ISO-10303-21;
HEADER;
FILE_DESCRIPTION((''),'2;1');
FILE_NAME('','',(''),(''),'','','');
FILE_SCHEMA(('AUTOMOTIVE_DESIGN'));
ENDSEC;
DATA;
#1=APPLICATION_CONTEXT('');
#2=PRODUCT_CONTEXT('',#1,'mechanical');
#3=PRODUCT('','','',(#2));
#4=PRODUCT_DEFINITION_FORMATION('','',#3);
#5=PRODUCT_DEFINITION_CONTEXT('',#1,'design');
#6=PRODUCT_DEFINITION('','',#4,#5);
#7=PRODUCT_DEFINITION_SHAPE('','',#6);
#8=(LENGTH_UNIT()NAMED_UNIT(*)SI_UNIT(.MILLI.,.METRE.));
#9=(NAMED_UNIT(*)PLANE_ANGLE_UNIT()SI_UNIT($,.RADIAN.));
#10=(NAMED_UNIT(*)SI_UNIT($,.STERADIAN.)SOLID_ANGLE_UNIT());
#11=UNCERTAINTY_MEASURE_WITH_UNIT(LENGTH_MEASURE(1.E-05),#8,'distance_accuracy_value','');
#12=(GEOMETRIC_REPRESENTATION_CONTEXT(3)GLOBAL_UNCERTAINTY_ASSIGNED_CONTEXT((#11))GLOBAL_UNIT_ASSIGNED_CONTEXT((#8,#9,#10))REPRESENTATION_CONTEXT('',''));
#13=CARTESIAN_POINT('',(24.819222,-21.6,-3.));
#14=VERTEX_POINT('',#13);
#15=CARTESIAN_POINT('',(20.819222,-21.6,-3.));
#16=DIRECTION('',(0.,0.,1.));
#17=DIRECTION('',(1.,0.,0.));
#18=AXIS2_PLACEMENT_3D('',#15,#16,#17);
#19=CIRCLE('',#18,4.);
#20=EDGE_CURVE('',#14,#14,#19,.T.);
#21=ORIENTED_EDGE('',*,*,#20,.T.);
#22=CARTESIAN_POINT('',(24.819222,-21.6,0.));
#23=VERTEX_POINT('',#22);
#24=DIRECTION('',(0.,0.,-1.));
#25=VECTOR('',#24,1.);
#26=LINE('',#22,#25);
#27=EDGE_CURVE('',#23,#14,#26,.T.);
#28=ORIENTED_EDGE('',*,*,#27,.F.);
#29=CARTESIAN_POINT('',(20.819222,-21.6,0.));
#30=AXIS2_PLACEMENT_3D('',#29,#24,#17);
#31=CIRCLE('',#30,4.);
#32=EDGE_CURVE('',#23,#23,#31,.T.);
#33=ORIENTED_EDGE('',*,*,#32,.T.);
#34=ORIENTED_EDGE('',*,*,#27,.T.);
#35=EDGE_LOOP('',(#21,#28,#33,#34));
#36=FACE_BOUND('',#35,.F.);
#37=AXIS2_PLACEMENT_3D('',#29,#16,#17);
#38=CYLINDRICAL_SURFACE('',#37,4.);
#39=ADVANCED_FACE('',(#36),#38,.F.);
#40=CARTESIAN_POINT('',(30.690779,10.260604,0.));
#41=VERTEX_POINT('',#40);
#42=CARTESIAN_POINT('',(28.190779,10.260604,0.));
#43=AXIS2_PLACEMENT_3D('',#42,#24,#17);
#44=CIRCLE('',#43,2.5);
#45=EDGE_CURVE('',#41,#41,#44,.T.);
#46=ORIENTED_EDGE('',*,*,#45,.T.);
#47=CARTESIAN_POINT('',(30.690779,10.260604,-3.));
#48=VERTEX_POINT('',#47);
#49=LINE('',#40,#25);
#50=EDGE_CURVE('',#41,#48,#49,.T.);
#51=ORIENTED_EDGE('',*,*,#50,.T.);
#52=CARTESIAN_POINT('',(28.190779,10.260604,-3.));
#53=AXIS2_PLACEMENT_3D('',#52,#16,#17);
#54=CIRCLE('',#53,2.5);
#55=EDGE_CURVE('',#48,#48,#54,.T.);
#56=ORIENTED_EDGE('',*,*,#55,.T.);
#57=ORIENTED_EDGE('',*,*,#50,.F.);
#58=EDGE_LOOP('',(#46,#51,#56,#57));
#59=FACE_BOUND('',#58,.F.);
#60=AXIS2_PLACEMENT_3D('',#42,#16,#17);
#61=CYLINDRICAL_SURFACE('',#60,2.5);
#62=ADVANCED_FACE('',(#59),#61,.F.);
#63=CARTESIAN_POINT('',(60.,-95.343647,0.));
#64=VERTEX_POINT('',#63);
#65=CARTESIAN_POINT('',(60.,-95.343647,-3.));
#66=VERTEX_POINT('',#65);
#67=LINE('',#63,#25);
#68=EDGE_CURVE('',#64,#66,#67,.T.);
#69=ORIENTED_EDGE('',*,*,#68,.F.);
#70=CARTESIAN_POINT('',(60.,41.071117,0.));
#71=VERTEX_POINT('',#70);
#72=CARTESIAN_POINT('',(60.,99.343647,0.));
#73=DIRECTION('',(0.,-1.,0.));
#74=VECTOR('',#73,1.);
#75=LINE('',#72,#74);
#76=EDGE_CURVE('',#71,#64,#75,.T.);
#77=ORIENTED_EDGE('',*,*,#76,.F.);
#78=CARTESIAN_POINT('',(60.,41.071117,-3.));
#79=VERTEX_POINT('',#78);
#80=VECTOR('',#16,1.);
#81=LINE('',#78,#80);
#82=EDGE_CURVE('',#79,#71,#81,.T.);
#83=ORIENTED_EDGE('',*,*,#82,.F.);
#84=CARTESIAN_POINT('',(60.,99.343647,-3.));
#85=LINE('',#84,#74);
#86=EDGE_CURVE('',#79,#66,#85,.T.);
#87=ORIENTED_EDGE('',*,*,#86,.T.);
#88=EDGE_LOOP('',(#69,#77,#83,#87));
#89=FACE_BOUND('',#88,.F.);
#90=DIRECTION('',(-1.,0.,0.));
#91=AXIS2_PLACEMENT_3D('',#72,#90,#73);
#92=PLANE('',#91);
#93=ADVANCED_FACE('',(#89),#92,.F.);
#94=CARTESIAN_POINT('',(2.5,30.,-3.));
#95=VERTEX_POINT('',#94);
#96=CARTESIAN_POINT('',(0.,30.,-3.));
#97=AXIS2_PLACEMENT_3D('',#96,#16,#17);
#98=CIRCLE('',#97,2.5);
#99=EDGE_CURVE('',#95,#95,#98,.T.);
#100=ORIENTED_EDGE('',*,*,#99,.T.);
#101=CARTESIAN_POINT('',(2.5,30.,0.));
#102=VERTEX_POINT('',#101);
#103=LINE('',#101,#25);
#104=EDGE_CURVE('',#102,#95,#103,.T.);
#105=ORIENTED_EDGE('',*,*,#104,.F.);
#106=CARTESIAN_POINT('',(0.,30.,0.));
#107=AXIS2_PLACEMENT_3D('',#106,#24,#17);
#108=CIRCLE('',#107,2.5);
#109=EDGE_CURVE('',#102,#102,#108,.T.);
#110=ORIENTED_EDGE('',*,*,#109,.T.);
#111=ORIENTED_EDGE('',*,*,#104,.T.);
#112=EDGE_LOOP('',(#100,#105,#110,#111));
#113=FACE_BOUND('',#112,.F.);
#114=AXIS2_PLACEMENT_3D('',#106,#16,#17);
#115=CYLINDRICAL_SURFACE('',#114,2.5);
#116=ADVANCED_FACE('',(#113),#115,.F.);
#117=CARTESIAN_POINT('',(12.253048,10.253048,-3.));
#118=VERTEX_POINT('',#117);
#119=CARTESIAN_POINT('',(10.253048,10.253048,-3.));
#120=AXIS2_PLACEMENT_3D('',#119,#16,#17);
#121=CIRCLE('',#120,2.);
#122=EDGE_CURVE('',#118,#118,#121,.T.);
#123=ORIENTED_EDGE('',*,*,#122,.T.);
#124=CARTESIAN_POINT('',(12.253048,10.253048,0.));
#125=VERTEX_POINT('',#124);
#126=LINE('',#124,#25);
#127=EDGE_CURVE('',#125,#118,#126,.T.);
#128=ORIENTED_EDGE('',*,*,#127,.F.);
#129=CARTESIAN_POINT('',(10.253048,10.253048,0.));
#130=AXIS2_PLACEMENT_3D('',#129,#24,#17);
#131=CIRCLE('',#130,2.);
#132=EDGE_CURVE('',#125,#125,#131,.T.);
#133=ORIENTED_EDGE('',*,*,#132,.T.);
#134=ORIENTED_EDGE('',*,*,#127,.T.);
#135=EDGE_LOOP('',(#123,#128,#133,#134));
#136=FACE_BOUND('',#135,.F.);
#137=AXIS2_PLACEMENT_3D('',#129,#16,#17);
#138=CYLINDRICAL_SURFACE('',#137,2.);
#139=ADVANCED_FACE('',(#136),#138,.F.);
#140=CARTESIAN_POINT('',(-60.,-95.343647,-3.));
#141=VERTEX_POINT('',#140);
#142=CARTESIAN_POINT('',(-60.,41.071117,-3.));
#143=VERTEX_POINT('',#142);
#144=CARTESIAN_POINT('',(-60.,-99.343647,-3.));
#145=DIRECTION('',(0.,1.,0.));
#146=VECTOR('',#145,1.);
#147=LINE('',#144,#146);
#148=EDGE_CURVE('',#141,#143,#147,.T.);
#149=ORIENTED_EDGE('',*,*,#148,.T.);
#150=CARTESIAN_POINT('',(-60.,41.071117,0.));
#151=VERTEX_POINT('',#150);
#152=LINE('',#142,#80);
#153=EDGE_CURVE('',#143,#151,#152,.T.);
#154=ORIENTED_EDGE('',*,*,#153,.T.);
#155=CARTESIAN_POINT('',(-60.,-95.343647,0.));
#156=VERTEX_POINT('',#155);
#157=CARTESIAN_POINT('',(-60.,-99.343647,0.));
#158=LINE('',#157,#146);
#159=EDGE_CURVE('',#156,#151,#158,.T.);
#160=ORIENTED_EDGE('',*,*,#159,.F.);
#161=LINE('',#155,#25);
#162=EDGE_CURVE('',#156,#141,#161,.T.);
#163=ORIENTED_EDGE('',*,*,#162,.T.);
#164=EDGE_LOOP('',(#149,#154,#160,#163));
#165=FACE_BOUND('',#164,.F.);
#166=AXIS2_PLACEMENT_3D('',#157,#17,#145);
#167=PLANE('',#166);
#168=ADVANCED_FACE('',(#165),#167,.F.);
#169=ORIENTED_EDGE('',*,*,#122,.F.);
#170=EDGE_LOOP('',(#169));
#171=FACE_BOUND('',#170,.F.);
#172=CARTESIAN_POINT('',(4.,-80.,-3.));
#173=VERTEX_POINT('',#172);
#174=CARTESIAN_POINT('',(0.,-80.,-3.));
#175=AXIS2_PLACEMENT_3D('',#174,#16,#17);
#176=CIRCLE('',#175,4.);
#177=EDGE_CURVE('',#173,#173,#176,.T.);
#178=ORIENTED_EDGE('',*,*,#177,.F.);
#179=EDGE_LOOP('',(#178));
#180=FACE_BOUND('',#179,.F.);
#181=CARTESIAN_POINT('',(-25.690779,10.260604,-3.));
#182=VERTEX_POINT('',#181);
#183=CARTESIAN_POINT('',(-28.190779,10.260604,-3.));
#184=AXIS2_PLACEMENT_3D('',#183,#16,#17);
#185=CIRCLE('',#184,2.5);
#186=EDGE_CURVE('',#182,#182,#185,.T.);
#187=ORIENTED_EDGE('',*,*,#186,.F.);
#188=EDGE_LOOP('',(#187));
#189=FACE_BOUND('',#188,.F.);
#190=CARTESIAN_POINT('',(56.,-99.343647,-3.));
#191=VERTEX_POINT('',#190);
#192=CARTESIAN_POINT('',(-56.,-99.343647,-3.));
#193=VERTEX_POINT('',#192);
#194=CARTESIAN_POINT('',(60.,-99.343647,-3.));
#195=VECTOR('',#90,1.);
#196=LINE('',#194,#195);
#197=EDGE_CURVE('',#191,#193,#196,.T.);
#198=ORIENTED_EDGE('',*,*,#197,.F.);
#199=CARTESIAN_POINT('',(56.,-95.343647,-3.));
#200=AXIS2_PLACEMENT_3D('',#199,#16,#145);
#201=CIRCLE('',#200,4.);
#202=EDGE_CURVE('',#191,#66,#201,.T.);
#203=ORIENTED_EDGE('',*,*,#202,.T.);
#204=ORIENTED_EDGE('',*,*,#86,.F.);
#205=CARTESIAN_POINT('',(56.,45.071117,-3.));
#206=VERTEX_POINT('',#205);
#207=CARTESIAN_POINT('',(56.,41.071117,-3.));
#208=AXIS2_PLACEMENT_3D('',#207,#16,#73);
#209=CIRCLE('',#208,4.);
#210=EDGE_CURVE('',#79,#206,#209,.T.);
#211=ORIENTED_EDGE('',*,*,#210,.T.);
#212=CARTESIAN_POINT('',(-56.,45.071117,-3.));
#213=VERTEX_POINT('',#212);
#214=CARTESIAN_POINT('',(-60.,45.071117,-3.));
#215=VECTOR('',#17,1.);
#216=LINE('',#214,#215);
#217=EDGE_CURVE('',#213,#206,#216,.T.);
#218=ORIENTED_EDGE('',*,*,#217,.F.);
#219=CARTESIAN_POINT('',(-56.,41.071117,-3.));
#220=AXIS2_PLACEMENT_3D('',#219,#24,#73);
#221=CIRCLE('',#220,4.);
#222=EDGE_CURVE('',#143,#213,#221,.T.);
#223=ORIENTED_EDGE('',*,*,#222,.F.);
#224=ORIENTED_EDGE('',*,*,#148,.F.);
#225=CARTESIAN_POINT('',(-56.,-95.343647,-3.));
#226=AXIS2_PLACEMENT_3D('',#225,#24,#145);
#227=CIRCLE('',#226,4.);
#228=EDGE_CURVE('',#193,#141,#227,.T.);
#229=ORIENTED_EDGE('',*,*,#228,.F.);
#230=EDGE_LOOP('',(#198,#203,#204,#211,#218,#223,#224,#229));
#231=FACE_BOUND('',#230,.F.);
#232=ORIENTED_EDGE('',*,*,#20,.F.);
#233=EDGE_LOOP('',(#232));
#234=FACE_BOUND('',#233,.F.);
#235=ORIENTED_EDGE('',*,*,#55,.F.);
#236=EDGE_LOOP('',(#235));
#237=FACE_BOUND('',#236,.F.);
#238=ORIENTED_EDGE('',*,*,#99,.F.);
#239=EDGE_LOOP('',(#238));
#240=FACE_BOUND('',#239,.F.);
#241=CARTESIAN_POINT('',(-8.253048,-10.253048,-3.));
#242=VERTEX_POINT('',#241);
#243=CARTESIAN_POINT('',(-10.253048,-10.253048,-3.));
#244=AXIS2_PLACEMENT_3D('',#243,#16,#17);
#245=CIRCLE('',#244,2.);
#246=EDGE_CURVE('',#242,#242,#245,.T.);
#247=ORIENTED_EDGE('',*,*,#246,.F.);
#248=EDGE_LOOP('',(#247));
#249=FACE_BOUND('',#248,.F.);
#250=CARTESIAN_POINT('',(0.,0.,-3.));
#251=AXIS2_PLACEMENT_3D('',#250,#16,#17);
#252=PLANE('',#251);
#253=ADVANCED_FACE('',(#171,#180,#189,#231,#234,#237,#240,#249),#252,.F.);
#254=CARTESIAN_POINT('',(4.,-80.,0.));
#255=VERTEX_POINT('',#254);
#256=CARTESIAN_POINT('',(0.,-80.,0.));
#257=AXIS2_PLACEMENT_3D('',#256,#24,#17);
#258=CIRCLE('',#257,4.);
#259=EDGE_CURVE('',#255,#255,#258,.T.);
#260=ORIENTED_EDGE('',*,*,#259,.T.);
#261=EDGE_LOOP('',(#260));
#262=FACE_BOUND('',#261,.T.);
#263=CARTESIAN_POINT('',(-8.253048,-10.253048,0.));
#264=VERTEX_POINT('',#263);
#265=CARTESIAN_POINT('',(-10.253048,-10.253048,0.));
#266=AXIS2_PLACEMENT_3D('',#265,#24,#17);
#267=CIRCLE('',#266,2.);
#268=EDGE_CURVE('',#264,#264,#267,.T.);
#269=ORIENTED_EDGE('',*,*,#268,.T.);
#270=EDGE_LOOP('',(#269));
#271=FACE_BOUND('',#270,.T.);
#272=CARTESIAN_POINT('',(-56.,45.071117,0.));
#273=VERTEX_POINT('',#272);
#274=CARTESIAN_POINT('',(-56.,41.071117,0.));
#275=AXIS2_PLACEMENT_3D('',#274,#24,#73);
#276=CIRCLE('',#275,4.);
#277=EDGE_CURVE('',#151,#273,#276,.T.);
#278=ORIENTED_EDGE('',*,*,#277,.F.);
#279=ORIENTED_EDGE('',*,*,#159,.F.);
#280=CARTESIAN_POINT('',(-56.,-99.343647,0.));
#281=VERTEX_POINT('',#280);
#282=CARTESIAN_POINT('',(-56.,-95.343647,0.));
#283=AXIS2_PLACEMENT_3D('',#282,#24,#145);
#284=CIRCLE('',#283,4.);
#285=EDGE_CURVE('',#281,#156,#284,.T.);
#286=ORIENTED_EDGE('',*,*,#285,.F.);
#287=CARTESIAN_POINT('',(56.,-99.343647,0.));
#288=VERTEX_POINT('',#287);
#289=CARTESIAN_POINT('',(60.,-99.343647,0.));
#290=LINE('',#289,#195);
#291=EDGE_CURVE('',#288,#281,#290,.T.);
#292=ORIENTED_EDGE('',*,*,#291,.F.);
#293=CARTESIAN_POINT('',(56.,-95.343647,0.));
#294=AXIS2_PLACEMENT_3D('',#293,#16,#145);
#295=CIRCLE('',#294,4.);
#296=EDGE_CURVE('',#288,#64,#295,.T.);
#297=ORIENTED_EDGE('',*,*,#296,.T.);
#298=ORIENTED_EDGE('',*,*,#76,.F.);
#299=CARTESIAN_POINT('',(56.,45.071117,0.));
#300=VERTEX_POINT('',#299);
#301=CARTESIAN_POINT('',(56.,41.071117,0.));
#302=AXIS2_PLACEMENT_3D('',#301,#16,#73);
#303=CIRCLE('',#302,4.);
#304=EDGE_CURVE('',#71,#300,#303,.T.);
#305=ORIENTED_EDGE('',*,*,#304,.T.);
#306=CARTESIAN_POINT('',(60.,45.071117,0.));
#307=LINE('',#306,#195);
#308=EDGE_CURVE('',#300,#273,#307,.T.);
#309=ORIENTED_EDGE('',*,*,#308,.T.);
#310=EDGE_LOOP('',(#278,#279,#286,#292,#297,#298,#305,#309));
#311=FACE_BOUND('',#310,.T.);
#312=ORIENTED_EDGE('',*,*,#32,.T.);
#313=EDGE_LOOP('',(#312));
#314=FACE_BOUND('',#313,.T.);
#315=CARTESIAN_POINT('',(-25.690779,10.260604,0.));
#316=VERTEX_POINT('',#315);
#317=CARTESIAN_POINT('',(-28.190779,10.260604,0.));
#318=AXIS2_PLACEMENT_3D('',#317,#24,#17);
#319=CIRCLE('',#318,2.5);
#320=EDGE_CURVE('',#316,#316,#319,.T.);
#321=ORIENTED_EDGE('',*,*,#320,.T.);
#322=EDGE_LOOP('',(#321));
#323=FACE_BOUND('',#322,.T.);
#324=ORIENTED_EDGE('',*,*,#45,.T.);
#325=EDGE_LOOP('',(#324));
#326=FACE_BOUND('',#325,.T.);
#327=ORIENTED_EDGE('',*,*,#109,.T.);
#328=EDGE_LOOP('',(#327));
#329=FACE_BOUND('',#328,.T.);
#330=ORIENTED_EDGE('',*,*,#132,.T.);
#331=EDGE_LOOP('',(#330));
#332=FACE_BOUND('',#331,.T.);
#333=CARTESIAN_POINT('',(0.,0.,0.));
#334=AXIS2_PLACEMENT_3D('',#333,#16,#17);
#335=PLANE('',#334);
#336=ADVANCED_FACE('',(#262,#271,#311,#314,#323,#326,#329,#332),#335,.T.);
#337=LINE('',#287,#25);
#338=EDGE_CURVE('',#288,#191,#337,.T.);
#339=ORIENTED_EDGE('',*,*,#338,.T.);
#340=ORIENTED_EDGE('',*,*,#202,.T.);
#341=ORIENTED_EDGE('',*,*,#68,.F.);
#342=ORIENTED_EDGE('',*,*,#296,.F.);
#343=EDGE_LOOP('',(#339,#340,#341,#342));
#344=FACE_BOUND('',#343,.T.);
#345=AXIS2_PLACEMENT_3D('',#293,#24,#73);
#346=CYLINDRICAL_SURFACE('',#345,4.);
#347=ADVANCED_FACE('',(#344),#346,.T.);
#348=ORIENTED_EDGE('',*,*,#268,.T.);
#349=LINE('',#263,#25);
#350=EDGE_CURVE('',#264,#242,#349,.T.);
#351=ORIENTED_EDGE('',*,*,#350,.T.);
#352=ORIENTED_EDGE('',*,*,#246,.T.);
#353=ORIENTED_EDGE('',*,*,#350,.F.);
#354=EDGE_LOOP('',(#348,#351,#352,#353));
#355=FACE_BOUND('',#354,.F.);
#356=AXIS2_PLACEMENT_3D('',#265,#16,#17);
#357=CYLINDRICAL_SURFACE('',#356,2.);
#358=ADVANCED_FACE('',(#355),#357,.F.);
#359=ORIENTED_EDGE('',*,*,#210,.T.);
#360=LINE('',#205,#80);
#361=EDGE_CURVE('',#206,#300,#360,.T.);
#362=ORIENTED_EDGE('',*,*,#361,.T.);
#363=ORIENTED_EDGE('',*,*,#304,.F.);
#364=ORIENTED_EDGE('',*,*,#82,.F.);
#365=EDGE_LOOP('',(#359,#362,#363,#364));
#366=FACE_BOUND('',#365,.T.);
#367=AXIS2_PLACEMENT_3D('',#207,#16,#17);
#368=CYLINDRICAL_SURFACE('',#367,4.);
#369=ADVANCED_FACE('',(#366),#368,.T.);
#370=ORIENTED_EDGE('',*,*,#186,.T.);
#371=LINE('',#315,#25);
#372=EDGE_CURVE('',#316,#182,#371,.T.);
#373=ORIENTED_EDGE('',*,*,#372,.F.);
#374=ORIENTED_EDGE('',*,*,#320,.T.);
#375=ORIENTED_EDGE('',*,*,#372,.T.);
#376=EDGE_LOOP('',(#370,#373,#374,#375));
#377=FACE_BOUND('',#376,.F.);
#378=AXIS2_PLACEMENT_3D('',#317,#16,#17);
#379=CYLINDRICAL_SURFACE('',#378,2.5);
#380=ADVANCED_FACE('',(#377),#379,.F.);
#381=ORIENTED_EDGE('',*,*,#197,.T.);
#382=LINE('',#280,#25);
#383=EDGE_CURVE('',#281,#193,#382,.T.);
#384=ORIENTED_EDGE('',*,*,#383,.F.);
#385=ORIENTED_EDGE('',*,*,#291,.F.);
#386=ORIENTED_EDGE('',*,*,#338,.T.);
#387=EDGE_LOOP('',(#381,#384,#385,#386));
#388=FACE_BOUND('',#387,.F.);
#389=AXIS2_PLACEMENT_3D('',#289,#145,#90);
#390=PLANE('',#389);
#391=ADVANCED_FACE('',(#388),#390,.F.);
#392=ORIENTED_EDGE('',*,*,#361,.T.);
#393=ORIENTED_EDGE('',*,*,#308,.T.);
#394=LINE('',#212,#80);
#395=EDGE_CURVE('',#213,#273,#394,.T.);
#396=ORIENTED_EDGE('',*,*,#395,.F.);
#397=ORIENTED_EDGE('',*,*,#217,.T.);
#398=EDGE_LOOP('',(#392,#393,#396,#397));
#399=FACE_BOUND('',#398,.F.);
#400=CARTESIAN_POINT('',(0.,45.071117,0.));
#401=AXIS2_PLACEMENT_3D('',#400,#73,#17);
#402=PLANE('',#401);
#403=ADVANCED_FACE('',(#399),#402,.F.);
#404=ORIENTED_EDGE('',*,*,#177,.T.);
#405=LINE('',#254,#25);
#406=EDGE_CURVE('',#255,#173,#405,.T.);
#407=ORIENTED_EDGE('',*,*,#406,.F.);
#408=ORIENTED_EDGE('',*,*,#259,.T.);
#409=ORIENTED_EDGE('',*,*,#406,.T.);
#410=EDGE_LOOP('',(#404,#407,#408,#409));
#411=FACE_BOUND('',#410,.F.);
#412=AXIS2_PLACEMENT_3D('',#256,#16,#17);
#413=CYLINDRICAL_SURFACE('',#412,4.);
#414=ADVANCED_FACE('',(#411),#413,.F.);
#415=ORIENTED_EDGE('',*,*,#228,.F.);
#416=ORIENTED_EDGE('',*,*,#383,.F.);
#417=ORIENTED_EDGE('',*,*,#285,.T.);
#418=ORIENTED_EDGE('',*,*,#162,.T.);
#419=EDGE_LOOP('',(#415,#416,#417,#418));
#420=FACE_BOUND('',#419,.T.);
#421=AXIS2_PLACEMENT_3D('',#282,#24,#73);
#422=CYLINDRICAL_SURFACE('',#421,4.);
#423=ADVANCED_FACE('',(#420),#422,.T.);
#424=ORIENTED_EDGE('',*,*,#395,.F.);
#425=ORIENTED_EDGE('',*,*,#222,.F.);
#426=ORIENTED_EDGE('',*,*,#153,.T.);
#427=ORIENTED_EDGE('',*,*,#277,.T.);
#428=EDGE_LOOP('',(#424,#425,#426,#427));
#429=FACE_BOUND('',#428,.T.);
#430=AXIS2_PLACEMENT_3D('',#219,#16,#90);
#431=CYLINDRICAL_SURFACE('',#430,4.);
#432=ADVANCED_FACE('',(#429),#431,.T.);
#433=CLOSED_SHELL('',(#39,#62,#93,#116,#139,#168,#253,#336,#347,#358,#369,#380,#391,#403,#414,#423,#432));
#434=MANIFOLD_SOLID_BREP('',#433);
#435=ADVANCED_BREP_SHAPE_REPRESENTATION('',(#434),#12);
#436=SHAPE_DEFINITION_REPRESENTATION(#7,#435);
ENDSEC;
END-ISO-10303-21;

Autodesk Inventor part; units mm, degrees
ref_plane "YZ Plane" through (0, 0, 0) normal (1, 0, 0) x (0, 1, 0)
ref_plane "XZ Plane" through (0, 0, 0) normal (0, 1, 0) x (-1, 0, 0)
ref_plane "XY Plane" through (0, 0, 0) normal (0, 0, 1) x (1, 0, 0)
sketch "スケッチ1" plane through (0, 0, 0) normal (0, 0, 1) x (1, 0, 0)
  circle A0 centre (0, 0) radius 21.2
  circle A1 centre (0, 0) radius 7.5
  circle A2 centre (0, 0) radius 30
  circle A3 centre (20.819222, -21.6) radius 22.5
  circle A4 centre (20.819222, -21.6) radius 14
  circle A5 centre (20.819222, -21.6) radius 62
  circle A6 centre (0, -80) radius 48
  circle A7 centre (0, -80) radius 50
  circle A8 centre (20.819222, -21.6) radius 4
  circle A9 centre (0, -80) radius 4
  dimension "d2" = 60
  dimension "d4" = 124
  dimension "d0" = 42.4
  dimension "d1" = 15
  dimension "d3" = 28
  dimension "d5" = 100
  dimension "d23" = 8
  dimension "d41" = 8
sketch "スケッチ2" plane through (0, 0, 0) normal (0, 0, 1) x (1, 0, 0)
  line L0 (0, 0) -> (24.501973, 0) construction
  line L1 (0, 0) -> (12.5, 0) construction
  line L2 (0, 0) -> (10.253048, 10.253048)
  line L3 (0, 0) -> (14.5, 0) construction
  line L4 (10.253048, 10.253048) -> (-10.253048, -10.253048)
  circle A0 centre (10.253048, 10.253048) radius 2
  circle A1 centre (-10.253048, -10.253048) radius 2
  circle A2 centre (0, 0) radius 7.5
  line L5 (0, 0) -> (28.190779, 10.260604)
  line L6 (0, 0) -> (30, 0) construction
  line L7 (0, 0) -> (-28.190779, 10.260604)
  line L8 (0, 0) -> (30, 0) construction
  circle A3 centre (-28.190779, 10.260604) radius 2.5
  line L9 (0, 0) -> (0, 30)
  circle A4 centre (0, 30) radius 2.5
  circle A5 centre (28.190779, 10.260604) radius 2.5
  dimension "d9" = 14.5
  dimension "d10" = 45
  dimension "d11" = 29
  dimension "d12" = 4
  dimension "d13" = 4
  dimension "d14" = 15
  dimension "d15" = 30
  dimension "d16" = 20
  dimension "d17" = 30
  dimension "d18" = 160
  dimension "d19" = 5
  dimension "d20" = 30
  dimension "d21" = 5
  dimension "d22" = 5
sketch "スケッチ3" plane through (0, 0, 0) normal (0, 0, 1) x (1, 0, 0)
  line L0 (60, -99.343647) -> (-60, -99.343647)
  line L1 (-60, -99.343647) -> (-60, 99.343647)
  line L2 (-60, 99.343647) -> (60, 99.343647)
  line L3 (60, 99.343647) -> (60, -99.343647)
  line L4 (60, -99.343647) -> (-60, 99.343647) construction
  line L5 (-60, -99.343647) -> (60, 99.343647) construction
  point P0 (0, 0)
  dimension "d25" = 120
extrude "押し出し1" add sketch "スケッチ3" against normal blind 3
sketch "スケッチ4" plane through (0, 0, 0) normal (0, 0, 1) x (1, 0, 0)
  line L0 (0, 45.071117) -> (68.359536, 45.071117)
  line L1 (68.359536, 45.071117) -> (-74.382402, 45.071117)
  line L2 (-74.382402, 45.071117) -> (108.165644, 45.071117)
  line L3 (108.165644, 45.071117) -> (108.165644, 129.415375)
  line L4 (108.165644, 129.415375) -> (-74.382402, 129.415375)
  line L5 (-74.382402, 129.415375) -> (-74.382402, 45.071117)
  point P0 (0, 0)
extrude "押し出し4" cut sketch "スケッチ4" against normal blind 10
fillet "フィレット1" radius 4 4 edges at (-60, 45.0711, -1.5) (60, 45.0711, -1.5) (-60, -99.3436, -1.5) (60, -99.3436, -1.5)
extrude "押し出し7" cut sketch "スケッチ1" against normal blind 10 contours A8 A2 | A2 A8 | A9 A5 | A5 A9
extrude "押し出し8" cut sketch "スケッチ2" against normal blind 10 contours A0 | A1 | A3 | A4 | A5
properties part number "板"
